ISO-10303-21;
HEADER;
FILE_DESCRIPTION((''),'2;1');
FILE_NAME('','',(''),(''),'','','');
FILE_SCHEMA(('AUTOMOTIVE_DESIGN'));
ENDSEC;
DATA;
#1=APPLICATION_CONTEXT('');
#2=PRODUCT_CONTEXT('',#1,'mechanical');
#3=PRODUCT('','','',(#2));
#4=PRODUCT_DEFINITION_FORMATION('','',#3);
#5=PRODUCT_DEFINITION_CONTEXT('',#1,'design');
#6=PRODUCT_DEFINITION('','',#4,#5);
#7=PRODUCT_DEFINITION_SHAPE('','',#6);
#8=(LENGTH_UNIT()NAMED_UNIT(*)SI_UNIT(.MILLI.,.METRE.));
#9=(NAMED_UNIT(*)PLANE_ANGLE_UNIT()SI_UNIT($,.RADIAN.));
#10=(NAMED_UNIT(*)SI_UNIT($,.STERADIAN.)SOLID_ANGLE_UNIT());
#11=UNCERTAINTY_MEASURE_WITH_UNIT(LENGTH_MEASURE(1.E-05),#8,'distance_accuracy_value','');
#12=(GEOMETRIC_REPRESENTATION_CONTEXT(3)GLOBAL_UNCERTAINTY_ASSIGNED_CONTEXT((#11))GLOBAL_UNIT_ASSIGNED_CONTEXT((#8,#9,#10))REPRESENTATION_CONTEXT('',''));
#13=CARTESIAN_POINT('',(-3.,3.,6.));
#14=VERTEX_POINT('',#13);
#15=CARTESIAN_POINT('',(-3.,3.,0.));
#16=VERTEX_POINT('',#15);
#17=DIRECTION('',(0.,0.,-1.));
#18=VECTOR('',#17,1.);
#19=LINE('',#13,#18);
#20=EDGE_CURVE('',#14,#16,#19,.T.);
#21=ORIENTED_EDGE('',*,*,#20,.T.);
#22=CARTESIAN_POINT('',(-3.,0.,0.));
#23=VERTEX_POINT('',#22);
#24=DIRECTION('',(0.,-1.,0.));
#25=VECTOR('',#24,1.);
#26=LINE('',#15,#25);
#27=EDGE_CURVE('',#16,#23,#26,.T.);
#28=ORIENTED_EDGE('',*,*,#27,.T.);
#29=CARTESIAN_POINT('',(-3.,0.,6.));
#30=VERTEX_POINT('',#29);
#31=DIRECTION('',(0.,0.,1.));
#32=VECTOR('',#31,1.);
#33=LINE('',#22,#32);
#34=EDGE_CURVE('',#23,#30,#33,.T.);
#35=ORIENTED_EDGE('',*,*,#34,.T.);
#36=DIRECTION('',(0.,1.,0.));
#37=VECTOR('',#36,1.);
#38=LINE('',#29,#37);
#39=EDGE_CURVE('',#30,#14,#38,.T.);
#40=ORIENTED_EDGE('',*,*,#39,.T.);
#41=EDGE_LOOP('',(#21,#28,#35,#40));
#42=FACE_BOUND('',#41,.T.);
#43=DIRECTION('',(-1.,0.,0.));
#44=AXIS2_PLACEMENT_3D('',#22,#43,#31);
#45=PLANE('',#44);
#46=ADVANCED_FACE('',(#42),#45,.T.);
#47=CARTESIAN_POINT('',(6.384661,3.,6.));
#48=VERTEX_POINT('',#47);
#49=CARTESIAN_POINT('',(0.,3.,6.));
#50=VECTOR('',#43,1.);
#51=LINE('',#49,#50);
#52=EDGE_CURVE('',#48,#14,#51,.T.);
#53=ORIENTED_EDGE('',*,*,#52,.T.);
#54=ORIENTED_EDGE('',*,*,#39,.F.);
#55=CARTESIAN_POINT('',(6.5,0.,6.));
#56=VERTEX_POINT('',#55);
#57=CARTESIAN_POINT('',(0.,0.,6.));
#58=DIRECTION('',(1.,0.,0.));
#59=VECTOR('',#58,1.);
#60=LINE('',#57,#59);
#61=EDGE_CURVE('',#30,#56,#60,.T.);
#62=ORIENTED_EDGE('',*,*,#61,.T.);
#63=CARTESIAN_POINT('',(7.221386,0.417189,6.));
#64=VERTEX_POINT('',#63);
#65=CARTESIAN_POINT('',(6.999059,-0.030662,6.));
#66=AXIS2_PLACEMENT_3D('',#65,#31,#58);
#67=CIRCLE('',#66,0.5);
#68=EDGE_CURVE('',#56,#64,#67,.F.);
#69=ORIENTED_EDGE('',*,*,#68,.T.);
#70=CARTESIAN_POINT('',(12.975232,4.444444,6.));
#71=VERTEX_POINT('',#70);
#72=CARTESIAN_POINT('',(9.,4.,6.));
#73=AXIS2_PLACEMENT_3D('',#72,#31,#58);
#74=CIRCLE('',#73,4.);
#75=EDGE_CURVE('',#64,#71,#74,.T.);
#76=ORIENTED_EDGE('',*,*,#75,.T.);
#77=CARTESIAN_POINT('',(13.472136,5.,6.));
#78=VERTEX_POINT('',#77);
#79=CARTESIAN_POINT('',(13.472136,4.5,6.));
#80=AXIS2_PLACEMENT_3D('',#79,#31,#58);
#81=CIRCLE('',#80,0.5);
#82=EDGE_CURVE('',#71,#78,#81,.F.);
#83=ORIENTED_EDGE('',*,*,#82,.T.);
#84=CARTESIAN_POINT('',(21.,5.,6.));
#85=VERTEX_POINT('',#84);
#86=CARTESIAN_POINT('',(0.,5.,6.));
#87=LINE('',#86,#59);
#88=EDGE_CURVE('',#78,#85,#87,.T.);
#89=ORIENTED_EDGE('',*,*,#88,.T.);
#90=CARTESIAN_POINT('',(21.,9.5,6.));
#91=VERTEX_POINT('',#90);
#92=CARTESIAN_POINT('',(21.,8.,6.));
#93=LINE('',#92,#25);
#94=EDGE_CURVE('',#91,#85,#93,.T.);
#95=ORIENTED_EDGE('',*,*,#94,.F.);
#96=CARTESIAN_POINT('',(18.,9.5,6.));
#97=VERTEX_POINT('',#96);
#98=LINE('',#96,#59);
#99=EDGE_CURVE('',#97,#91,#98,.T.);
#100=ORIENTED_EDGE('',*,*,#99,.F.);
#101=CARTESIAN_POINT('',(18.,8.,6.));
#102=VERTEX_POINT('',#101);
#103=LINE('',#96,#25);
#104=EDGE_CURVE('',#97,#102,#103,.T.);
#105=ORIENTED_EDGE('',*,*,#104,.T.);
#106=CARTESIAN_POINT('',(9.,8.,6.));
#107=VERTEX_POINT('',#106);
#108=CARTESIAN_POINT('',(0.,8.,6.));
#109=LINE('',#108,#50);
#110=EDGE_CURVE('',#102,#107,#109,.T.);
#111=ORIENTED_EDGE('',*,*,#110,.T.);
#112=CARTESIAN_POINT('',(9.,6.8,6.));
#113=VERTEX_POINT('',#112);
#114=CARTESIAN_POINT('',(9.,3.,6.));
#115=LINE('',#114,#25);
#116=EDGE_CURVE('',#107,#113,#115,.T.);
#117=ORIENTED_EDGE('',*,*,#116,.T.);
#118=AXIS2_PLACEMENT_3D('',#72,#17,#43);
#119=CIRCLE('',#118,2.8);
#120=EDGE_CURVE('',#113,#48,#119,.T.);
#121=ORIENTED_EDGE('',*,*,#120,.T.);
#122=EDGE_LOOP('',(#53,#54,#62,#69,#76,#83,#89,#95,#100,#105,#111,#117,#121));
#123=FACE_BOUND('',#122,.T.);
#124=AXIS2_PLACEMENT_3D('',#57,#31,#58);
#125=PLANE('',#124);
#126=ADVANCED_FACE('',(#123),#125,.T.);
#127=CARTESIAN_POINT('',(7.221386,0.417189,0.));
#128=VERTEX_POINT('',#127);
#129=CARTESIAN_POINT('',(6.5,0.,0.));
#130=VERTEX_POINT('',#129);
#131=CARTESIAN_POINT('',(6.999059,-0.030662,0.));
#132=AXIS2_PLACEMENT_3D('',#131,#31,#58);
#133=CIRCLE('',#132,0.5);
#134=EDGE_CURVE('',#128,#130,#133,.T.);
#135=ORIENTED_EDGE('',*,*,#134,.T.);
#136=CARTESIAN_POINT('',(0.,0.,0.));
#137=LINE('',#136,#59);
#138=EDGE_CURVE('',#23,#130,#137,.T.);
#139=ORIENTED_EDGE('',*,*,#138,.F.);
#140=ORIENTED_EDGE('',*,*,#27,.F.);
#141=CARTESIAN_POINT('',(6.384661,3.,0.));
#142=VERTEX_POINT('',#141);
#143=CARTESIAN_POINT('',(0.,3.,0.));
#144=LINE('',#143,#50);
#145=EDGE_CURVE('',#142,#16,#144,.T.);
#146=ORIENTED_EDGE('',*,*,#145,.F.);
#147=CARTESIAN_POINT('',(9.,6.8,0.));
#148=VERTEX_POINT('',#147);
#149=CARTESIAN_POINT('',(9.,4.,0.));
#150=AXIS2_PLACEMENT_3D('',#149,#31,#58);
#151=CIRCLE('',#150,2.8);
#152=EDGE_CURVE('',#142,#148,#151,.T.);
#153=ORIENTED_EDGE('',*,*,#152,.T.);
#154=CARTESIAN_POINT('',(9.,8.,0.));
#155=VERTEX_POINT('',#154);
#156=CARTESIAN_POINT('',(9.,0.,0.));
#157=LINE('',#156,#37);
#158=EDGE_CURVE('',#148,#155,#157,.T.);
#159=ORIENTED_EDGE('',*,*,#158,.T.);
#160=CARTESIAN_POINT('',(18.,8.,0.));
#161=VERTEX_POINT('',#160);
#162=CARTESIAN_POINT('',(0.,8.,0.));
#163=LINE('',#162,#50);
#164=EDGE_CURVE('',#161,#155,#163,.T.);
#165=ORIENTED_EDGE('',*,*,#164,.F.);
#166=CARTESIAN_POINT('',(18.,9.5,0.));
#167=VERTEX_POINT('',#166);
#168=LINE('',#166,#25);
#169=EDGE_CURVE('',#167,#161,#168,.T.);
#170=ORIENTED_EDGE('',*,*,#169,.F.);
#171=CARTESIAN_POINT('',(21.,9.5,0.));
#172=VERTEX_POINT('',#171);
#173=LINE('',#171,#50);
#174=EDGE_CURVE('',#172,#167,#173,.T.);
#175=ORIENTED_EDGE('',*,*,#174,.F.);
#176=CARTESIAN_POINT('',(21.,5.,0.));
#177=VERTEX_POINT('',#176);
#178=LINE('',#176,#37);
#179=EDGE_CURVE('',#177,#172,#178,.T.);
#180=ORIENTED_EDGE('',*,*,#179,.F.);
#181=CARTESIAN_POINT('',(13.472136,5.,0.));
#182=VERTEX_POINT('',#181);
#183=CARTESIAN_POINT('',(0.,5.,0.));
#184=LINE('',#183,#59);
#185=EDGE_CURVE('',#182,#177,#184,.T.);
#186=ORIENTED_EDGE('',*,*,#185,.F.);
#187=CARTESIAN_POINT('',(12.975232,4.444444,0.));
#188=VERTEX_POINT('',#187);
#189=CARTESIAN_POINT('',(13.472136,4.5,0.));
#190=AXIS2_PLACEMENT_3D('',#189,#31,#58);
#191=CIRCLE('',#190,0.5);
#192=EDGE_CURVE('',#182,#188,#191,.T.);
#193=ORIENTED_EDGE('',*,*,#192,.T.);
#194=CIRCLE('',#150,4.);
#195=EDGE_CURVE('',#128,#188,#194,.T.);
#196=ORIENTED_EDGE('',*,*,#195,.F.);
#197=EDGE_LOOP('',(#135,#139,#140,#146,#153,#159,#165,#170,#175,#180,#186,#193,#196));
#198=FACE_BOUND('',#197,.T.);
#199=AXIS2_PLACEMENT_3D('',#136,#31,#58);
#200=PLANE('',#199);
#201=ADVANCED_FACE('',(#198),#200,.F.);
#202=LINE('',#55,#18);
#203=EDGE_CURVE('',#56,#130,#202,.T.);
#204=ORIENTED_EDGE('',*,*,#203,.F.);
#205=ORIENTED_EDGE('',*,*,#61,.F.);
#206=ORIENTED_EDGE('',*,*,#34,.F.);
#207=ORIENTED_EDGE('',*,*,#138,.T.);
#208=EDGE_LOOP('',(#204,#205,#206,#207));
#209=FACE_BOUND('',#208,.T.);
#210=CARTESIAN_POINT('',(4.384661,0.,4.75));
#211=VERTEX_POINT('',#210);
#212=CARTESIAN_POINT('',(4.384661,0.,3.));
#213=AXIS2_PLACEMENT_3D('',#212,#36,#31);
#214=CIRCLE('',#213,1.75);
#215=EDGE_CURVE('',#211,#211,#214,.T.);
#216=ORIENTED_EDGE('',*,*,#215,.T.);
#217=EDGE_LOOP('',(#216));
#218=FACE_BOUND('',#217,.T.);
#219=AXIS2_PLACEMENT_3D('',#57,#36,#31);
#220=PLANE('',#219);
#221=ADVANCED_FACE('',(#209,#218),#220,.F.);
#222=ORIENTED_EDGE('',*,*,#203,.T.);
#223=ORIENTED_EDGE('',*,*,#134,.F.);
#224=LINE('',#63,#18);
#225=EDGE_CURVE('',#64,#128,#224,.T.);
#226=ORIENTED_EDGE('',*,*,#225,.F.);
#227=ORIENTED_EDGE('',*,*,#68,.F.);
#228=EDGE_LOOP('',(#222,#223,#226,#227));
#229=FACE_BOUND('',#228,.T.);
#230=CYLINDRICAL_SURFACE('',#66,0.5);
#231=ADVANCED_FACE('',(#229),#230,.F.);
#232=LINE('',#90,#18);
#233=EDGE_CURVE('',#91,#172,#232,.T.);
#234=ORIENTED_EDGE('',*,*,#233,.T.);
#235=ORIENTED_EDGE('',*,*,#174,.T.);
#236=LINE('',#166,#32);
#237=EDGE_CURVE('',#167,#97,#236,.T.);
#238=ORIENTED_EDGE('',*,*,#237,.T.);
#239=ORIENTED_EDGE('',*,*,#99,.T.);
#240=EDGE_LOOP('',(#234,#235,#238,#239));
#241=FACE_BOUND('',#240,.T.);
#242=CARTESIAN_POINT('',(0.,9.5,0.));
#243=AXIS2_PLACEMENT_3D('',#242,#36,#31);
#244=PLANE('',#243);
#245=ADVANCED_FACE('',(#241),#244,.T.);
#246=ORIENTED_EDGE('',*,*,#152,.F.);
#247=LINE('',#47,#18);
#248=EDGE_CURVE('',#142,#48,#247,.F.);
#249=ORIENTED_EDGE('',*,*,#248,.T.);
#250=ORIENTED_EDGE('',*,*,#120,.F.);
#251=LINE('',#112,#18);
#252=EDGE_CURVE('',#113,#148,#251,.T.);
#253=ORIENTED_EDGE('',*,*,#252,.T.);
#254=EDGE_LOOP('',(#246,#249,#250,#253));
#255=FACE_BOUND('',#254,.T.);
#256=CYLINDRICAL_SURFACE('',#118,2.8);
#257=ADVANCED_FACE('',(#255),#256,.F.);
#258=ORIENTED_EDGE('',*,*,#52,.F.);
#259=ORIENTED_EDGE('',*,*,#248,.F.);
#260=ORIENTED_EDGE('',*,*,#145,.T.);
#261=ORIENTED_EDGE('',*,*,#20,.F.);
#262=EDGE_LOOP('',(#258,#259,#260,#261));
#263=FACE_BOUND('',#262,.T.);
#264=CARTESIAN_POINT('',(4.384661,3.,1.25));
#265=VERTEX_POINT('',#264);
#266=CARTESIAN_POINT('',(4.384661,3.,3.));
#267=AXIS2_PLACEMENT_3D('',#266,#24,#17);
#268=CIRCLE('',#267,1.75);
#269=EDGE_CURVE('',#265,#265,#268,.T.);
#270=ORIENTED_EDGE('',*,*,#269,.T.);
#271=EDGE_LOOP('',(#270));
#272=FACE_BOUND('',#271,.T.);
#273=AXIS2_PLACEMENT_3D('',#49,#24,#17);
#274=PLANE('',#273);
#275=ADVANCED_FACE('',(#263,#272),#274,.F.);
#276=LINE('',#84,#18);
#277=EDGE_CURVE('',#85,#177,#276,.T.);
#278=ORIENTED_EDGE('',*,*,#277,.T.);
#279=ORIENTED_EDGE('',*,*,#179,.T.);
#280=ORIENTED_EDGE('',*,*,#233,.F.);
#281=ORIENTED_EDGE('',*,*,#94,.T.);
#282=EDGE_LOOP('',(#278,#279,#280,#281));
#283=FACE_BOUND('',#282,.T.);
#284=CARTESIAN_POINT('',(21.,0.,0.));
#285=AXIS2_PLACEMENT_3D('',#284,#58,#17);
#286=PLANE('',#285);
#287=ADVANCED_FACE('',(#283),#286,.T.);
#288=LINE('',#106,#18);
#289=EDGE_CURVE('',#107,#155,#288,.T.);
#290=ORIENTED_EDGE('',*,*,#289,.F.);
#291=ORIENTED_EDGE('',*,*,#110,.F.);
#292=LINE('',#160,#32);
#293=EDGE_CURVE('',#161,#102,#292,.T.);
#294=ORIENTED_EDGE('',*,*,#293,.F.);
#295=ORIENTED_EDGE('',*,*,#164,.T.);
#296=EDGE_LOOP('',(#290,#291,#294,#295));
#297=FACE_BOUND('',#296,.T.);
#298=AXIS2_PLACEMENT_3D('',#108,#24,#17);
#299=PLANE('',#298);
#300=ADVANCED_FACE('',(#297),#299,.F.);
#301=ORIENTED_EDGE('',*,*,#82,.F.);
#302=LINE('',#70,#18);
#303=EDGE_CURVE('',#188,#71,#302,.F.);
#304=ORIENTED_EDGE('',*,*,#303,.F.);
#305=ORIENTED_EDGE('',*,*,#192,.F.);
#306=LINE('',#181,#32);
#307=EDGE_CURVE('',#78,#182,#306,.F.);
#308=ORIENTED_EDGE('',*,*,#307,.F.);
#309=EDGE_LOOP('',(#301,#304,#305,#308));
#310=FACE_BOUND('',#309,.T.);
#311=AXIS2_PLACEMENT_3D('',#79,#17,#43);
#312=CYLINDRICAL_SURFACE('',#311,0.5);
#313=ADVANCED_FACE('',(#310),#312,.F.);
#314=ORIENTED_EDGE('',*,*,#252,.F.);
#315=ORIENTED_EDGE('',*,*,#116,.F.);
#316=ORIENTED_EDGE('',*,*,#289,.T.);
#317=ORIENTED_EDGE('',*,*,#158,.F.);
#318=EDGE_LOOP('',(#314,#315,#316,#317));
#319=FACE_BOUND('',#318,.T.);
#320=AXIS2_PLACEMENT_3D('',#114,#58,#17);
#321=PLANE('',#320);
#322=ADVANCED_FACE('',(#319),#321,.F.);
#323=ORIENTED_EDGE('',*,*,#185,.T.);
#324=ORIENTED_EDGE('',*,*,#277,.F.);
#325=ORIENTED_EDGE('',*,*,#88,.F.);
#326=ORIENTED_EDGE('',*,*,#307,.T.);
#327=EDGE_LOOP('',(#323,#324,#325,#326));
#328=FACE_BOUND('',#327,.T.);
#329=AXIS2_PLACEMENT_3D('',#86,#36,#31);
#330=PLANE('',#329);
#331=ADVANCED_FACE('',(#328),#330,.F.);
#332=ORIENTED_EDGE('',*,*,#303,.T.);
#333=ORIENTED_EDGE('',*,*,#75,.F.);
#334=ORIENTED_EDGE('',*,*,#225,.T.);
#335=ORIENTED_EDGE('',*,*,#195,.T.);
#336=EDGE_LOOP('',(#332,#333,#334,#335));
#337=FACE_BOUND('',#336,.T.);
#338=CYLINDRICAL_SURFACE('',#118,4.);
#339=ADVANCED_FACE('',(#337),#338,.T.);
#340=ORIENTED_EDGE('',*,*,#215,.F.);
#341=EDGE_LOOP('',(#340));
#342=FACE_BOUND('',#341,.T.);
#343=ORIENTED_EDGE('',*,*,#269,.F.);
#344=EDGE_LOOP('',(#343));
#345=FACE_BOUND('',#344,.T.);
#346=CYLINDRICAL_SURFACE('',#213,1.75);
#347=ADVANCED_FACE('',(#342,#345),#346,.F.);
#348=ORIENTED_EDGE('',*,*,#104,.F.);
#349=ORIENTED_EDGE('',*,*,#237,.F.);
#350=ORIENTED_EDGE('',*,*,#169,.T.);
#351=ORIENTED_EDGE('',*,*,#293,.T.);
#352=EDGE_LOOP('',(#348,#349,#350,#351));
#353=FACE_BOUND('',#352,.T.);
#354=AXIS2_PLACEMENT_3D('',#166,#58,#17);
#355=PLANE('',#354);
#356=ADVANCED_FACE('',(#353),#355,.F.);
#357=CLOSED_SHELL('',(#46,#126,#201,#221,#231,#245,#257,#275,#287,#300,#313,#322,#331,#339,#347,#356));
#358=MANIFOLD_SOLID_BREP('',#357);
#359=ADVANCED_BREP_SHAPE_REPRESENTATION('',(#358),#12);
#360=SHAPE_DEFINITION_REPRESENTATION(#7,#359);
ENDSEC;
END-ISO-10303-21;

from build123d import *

# Parameters (mm, degrees)
ESBO_O1_R                  = 4
ESBO_O1_W                  = 6.5
ESBO_O1_H                  = 3
EXTRUDE1_CORPO_DEPTH       = 6
FURO_ANEL_DEPTH            = 21.591260282
FURO_ANEL_DEPTH_BACK       = 21.591260282
ESBO_O2_R                  = 2.8
ABERTURA_C_DEPTH           = 21.591260282
ABERTURA_C_DEPTH_BACK      = 21.591260282
ESBO_O3_W                  = 6
ESBO_O3_H                  = 6
FILLET_JUNCOES_R           = 0.5
ESBO_O4_W                  = 6
ESBO_O4_H                  = 3
RESSALTO_EXTRUS_O2_DEPTH   = 3
ESBO_O5_W                  = 6
ESBO_O5_H                  = 3
RESSALTO_EXTRUS_O3_DEPTH   = 3
ESBO_O6_W                  = 3
ESBO_O6_H                  = 6
RESSALTO_EXTRUS_O4_DEPTH   = 1.5
CORTE_EXTRUS_O3_DEPTH      = 23.78705773
CORTE_EXTRUS_O3_DEPTH_BACK = 23.78705773
ESBO_O7_R                  = 1.75


with BuildPart() as part:
    # Esboço1 → Extrude1_Corpo (new body)
    with BuildSketch(Plane.XY):
        with BuildLine():
            ThreePointArc((5.127016654, 3), (5.6414319, 1.827439226), (6.5, 0.877501001))
            Line((6.5, 0.877501001), (6.5, 3))
            Line((6.5, 3), (5.127016654, 3))
        make_face()
        with BuildLine():
            ThreePointArc((12.872983346, 5), (11.449489743, 7.16227766), (9, 8))
            Line((9, 8), (9, 5))
            Line((9, 5), (12.872983346, 5))
        make_face()
        with Locations((9, 4)):
            Circle(ESBO_O1_R)
        with Locations((3.25, 1.5)):
            Rectangle(ESBO_O1_W, ESBO_O1_H)
        with BuildLine():
            Line((18, 8), (9, 8))
            ThreePointArc((9, 8), (11.449489743, 7.16227766), (12.872983346, 5))
            Line((12.872983346, 5), (18, 5))
            Line((18, 5), (18, 8))
        make_face()
        with BuildLine():
            Line((6.5, 3), (6.5, 0.877501001))
            ThreePointArc((6.5, 0.877501001), (10.732050808, 0.394448725), (13, 4))
            ThreePointArc((13, 4), (12.968118785, 4.50401717), (12.872983346, 5))
            Line((12.872983346, 5), (9, 5))
            Line((9, 5), (9, 8))
            ThreePointArc((9, 8), (5.83772234, 6.449489743), (5.127016654, 3))
            Line((5.127016654, 3), (6.5, 3))
        make_face()
    extrude(amount=EXTRUDE1_CORPO_DEPTH)

    # Esboço2 → Furo_Anel (cut, two sides: drawn at the far end of the back side and taken through both)
    with BuildSketch(Plane(origin=(0, 0, 0), x_dir=(-1, 0, 0), z_dir=(0, 0, -1)).offset(-FURO_ANEL_DEPTH_BACK)):
        with Locations((-9, 4)):
            Circle(ESBO_O2_R)
    extrude(amount=FURO_ANEL_DEPTH + FURO_ANEL_DEPTH_BACK, mode=Mode.SUBTRACT)

    # Esboço3 → Abertura_C (cut, two sides: drawn at the far end of the back side and taken through both)
    with BuildSketch(Plane(origin=(0, 0, 0), x_dir=(-1, 0, 0), z_dir=(0, 0, -1)).offset(-ABERTURA_C_DEPTH_BACK)):
        with Locations((-6, 6)):
            Rectangle(ESBO_O3_W, ESBO_O3_H)
    extrude(amount=ABERTURA_C_DEPTH + ABERTURA_C_DEPTH_BACK, mode=Mode.SUBTRACT)

    # Fillet_Juncoes
    # the kernel refuses this fillet: 0.5 mm, written as the material it adds along each edge
    with BuildSketch(Plane(origin=(12.872983346, 5, 0), x_dir=(1, 0, 0), z_dir=(0, 0, 1))) as fillet_juncoes_piece_1:
        with BuildLine():
            CenterArc((0.599152609, -0.5), FILLET_JUNCOES_R, 90, 96.379370208)
            Line((0.102248614, -0.555555556), (0.092310534, -0.556666667))
            ThreePointArc((0.092310534, -0.556666667), (0.051108802, -0.277780632), (-0.009682458, -0.0025))
            Line((-0.009682458, -0.0025), (0, 0.01))
            Line((0, 0.01), (0.599152609, 0.01))
            Line((0.599152609, 0.01), (0.599152609, 0))
        make_face()
    extrude(amount=6)
    with BuildSketch(Plane(origin=(6.5, 0.877501001, 0), x_dir=(0.8430003462487853, -0.5379130191995991, 0), z_dir=(0, 0, 1))) as fillet_juncoes_piece_2:
        with BuildLine():
            CenterArc((0.909219503, -0.497131286), FILLET_JUNCOES_R, 96.140505738, 112.885380476)
            Line((0.472019213, -0.739733648), (0.463275207, -0.744585695))
            ThreePointArc((0.463275207, -0.744585695), (0.227579603, -0.375245954), (-0.008430003, -0.00537913))
            Line((-0.008430003, -0.00537913), (0.00106967, 0.009942626))
            ThreePointArc((0.00106967, 0.009942626), (0.427868002, -0.012949715), (0.854666333, 0.009942626))
            Line((0.854666333, 0.009942626), (0.855736003, 0))
        make_face()
    extrude(amount=6)

    # Esboço4 → Ressalto-extrusão2 (add)
    with BuildSketch(Plane.ZY):
        with Locations((3, 1.5)):
            Rectangle(ESBO_O4_W, ESBO_O4_H)
    extrude(amount=RESSALTO_EXTRUS_O2_DEPTH)



with BuildPart() as body_2:
    # Esboço5 → Ressalto-extrusão3 (new body)
    with BuildSketch(Plane(origin=(18, 0, 0), x_dir=(0, 0, -1), z_dir=(1, 0, 0))):
        with Locations((-3, 6.5)):
            Rectangle(ESBO_O5_W, ESBO_O5_H)
    extrude(amount=RESSALTO_EXTRUS_O3_DEPTH)


with BuildPart() as part_1:
    add(part.part)

    add(body_2.part)  # Ressalto-extrusão4 merges body 2
    # Esboço6 → Ressalto-extrusão4 (add)
    with BuildSketch(Plane(origin=(0, 8, 0), x_dir=(1, 0, 0), z_dir=(0, 1, 0))):
        with Locations((19.5, -3)):
            Rectangle(ESBO_O6_W, ESBO_O6_H)
    extrude(amount=RESSALTO_EXTRUS_O4_DEPTH)

    # Esboço7 → Corte-extrusão3 (cut, two sides: drawn at the far end of the back side and taken through both)
    with BuildSketch(Plane(origin=(0, 3, 0), x_dir=(1, 0, 0), z_dir=(0, 1, 0)).offset(-CORTE_EXTRUS_O3_DEPTH_BACK)):
        with Locations(Location((4.384660634, -3, 0), (0, 0, 270))):
            Circle(ESBO_O7_R)
    extrude(amount=CORTE_EXTRUS_O3_DEPTH + CORTE_EXTRUS_O3_DEPTH_BACK, mode=Mode.SUBTRACT)


solid = part_1.part
